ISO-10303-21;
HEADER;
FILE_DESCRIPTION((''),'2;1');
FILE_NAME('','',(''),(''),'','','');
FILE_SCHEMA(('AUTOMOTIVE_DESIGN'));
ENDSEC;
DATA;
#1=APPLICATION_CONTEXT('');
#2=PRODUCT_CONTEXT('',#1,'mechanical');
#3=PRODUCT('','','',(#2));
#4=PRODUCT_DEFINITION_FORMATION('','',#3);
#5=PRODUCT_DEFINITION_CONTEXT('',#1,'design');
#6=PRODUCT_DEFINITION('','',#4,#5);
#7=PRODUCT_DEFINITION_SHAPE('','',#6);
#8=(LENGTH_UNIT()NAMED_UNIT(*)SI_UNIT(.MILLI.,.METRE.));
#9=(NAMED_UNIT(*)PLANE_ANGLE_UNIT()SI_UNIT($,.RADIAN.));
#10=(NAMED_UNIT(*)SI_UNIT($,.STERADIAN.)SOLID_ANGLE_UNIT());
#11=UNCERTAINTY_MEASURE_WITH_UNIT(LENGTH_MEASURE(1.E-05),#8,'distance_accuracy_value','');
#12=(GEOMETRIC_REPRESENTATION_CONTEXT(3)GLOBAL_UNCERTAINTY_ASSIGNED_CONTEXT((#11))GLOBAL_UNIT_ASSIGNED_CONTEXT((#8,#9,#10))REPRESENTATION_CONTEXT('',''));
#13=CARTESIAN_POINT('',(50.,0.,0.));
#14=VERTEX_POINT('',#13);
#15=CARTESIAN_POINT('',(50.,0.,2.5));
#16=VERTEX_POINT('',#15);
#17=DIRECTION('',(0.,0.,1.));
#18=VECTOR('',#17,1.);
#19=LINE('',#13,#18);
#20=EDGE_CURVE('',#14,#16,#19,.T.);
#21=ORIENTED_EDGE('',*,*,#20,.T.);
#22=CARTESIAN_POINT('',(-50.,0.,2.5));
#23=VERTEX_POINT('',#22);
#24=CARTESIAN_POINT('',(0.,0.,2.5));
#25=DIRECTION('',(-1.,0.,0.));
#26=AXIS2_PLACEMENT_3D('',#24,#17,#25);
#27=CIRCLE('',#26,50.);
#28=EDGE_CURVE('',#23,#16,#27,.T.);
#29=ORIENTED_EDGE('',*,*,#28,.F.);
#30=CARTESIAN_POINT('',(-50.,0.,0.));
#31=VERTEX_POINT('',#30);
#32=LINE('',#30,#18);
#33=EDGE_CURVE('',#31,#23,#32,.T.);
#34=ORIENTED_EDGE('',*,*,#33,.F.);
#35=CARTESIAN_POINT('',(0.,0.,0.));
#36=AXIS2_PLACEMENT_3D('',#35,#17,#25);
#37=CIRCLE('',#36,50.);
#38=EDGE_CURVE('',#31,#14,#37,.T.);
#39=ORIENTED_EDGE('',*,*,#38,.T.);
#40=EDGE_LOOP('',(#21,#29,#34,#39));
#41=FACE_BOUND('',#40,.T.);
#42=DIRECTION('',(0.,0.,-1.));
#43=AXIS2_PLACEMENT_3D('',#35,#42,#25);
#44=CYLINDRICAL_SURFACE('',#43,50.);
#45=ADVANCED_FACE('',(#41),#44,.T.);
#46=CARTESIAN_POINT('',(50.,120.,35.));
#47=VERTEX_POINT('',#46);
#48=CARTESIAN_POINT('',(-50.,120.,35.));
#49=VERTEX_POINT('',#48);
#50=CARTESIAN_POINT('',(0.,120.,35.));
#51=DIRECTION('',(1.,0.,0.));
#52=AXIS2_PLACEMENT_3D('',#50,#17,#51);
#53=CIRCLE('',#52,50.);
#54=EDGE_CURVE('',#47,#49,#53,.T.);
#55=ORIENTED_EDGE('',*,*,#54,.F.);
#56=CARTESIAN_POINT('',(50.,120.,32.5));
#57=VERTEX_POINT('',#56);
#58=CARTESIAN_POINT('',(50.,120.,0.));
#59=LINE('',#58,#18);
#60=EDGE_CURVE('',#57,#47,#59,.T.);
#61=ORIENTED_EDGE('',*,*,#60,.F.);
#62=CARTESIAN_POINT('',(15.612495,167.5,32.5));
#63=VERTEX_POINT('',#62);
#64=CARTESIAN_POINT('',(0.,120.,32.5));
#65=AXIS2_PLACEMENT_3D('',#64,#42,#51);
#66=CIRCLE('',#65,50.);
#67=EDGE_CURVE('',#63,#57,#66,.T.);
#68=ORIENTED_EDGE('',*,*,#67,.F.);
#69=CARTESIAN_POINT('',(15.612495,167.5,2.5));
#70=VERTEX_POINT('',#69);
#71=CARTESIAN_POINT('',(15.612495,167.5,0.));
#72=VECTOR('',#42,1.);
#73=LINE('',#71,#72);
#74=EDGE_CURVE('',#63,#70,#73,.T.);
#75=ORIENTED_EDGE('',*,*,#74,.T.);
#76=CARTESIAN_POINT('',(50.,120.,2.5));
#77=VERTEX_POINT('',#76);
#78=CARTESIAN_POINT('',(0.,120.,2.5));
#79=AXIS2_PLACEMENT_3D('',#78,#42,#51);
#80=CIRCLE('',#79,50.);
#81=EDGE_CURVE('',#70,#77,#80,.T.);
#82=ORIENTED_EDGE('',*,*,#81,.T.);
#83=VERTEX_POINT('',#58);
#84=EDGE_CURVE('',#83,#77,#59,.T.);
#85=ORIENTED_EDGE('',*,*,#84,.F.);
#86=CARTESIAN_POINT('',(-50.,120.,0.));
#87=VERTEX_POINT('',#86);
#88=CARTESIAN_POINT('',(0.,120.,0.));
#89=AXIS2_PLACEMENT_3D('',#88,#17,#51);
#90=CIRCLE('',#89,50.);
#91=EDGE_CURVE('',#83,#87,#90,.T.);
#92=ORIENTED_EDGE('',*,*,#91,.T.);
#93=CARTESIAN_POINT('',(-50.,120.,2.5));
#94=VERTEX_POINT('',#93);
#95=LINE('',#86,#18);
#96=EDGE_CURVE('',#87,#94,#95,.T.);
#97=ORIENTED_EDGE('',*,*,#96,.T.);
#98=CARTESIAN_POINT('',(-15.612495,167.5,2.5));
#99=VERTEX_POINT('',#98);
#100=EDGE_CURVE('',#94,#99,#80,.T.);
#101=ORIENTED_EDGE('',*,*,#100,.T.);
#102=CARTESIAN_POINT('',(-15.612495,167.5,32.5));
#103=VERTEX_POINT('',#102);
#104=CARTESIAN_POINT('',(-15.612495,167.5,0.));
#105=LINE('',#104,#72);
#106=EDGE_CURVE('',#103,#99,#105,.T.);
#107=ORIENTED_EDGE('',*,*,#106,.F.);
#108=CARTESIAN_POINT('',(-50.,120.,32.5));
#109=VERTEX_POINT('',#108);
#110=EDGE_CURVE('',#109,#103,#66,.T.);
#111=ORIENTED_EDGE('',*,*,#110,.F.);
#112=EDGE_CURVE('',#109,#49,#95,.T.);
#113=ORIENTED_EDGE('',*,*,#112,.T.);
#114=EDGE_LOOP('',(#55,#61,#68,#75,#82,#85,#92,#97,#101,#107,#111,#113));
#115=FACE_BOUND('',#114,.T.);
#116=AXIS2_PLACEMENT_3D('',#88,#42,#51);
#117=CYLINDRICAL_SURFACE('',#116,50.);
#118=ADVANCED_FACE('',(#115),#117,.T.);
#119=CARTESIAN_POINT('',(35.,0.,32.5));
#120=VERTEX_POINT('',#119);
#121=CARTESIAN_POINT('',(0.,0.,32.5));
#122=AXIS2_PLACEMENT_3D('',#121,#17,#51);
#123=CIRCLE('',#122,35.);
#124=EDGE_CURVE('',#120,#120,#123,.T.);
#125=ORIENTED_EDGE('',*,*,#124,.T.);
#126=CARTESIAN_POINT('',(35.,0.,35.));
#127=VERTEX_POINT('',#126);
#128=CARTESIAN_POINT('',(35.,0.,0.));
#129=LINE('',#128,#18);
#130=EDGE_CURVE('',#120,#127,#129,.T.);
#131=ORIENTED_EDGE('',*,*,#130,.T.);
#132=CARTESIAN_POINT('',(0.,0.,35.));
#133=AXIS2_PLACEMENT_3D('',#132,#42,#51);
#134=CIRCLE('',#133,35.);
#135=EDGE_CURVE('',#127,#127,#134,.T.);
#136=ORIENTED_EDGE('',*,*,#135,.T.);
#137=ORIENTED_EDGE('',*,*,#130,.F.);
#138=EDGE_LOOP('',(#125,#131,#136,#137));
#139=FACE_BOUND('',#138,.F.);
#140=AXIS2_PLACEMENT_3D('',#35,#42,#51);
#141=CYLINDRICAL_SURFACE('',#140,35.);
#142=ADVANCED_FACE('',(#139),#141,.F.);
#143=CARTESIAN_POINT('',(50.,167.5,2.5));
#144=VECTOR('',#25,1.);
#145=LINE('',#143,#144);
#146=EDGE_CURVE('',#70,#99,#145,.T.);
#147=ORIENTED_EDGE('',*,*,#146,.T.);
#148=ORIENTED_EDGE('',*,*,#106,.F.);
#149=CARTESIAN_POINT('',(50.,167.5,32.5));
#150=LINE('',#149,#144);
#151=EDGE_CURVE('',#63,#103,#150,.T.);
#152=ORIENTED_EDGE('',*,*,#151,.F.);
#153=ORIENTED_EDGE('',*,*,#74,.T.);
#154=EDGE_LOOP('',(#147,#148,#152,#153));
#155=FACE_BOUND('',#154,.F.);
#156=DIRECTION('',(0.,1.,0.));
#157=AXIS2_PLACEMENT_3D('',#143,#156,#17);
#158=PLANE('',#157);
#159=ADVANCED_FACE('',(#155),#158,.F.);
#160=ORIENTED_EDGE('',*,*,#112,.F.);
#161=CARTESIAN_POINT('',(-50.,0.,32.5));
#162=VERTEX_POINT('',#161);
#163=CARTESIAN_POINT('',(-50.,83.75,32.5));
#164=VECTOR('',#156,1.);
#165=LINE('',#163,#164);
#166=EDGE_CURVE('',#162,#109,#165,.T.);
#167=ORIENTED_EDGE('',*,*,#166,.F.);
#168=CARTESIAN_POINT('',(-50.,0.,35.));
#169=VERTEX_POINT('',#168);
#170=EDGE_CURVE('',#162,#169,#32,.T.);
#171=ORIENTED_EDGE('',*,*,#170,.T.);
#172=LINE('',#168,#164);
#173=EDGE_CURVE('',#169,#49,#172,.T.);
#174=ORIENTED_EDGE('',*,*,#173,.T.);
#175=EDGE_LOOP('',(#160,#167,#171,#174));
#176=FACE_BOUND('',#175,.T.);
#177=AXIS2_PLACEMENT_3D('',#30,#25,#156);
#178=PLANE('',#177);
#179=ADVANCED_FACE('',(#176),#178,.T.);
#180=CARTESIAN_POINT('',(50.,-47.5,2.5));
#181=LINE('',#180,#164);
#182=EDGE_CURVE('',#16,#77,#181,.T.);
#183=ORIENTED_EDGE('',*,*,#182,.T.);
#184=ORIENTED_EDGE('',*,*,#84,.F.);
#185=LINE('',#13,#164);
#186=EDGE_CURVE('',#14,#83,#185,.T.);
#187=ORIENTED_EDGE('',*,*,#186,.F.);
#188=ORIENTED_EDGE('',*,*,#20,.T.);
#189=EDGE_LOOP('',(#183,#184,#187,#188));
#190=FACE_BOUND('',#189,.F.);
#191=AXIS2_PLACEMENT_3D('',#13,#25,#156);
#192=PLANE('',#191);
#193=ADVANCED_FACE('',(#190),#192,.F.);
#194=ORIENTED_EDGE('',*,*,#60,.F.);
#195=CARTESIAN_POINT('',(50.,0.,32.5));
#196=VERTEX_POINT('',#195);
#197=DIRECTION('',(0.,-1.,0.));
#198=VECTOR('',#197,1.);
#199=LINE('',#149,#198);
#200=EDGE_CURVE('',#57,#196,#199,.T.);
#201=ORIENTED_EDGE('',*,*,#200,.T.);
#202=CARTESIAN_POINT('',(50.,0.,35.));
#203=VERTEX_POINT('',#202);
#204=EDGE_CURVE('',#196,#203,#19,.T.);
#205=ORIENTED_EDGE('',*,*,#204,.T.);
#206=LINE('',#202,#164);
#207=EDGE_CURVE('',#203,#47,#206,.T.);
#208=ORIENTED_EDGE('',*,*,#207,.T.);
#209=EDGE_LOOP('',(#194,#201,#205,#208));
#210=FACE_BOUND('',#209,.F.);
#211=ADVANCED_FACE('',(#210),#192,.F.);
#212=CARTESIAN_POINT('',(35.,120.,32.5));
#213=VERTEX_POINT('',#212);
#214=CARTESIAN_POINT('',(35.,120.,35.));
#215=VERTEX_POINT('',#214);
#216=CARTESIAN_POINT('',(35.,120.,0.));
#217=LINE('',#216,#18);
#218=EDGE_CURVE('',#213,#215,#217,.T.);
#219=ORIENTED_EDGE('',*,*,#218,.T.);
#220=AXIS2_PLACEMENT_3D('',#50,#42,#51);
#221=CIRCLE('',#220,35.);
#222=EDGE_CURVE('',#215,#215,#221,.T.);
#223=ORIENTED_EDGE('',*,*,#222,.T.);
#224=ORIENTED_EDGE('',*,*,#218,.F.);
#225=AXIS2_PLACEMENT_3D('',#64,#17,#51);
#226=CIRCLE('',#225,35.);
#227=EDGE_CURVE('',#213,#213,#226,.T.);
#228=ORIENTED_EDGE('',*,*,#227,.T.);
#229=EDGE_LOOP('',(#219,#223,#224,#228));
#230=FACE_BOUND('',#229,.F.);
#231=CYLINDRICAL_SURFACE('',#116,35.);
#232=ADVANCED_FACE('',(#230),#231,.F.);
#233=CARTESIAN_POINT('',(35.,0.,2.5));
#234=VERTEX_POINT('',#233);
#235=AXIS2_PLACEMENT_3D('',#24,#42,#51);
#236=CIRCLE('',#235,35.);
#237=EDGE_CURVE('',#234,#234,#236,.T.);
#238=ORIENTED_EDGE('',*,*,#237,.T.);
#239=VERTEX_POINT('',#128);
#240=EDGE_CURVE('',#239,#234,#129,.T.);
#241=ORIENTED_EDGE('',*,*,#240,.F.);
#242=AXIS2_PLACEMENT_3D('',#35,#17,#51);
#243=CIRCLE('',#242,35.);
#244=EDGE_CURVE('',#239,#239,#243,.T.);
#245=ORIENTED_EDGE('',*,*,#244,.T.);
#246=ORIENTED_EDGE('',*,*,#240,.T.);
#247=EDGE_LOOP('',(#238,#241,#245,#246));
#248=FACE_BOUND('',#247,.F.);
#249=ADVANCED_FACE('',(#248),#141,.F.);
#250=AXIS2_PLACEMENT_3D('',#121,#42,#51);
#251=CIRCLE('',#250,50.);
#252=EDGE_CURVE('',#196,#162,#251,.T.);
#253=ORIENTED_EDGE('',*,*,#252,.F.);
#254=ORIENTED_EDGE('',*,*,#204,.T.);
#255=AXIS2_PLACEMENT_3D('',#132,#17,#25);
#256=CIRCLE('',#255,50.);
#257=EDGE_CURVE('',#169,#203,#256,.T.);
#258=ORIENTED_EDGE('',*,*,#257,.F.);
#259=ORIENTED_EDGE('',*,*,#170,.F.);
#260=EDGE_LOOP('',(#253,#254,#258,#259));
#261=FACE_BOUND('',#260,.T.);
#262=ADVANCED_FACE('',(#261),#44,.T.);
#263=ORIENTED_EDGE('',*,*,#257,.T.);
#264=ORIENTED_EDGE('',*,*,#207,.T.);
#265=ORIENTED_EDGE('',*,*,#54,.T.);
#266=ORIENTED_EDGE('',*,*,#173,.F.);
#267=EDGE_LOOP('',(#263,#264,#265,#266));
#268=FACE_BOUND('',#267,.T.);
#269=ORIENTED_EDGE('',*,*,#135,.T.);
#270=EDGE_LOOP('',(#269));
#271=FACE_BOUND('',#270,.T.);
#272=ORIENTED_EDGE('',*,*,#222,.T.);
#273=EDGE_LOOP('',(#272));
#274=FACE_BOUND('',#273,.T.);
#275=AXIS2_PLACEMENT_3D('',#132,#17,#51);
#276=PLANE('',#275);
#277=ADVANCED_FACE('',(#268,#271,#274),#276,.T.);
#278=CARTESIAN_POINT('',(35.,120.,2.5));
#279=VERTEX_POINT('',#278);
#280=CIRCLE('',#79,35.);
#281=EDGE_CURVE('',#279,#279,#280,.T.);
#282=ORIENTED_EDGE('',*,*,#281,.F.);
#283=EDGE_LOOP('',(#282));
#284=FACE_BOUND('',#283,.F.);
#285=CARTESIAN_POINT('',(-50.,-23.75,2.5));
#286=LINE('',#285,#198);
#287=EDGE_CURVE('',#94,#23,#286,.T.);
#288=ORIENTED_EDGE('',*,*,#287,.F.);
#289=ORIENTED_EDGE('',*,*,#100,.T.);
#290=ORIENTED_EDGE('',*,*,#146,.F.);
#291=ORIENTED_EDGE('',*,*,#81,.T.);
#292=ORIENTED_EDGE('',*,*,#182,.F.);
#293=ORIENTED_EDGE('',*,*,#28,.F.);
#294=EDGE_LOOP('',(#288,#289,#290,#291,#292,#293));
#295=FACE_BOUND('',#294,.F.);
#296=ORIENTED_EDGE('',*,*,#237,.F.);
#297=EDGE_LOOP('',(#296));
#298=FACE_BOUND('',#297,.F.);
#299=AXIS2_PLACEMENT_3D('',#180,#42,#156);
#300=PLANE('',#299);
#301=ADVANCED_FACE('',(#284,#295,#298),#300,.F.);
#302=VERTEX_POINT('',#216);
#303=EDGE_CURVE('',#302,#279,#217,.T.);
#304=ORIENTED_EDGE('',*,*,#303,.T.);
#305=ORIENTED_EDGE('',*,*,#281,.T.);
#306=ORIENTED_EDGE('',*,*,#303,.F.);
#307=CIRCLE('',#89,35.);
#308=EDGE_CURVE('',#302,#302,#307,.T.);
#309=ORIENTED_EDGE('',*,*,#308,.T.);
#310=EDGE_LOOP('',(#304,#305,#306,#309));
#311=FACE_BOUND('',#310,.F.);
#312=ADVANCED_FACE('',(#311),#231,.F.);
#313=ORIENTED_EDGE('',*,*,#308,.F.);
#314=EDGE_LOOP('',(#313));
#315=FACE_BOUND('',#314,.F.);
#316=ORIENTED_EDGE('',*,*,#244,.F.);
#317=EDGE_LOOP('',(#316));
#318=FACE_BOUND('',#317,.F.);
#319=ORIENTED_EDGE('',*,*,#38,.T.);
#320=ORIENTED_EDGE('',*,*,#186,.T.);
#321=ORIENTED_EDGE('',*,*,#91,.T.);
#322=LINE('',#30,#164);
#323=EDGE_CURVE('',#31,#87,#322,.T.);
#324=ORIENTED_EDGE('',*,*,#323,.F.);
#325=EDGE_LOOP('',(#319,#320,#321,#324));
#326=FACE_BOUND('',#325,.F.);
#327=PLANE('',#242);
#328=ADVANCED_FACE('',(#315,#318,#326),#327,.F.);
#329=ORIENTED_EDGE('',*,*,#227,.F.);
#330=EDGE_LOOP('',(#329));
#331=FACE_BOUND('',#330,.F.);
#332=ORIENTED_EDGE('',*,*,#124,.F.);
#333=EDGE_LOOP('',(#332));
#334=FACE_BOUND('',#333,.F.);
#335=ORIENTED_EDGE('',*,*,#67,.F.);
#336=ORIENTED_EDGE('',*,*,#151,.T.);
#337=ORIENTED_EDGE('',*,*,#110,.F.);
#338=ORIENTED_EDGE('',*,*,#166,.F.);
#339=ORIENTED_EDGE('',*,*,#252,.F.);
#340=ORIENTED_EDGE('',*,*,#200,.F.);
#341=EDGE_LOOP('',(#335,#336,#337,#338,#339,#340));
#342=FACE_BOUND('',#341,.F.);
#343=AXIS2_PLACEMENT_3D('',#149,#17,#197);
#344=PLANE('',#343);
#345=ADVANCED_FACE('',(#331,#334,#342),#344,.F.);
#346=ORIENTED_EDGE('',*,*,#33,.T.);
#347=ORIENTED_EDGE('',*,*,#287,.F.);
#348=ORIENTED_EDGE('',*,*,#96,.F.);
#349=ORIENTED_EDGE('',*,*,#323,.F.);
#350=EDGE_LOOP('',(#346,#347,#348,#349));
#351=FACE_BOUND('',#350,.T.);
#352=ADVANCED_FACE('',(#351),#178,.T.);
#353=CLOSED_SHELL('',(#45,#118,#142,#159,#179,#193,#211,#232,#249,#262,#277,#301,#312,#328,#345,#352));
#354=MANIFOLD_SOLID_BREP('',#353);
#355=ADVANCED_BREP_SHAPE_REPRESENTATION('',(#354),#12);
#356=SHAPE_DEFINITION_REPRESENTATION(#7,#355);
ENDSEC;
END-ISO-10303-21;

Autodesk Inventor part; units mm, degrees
ref_plane "YZ Plane" through (0, 0, 0) normal (1, 0, 0) x (0, 1, 0)
ref_plane "XZ Plane" through (0, 0, 0) normal (0, 1, 0) x (-1, 0, 0)
ref_plane "XY Plane" through (0, 0, 0) normal (0, 0, 1) x (1, 0, 0)
sketch "Sketch1" plane through (0, 0, 0) normal (0, 0, 1) x (1, 0, 0)
  circle A0 centre (0, 0) radius 35
  circle A1 centre (0, 120) radius 35
  arc A2 (-50, 0) -> (50, 0) centre (0, 0) ccw
  arc A3 (50, 120) -> (-50, 120) centre (0, 120) ccw
  line L0 (-50, 0) -> (-50, 120)
  line L1 (50, 0) -> (50, 120)
  line L2 (0, 35) -> (0, 85)
  dimension "d0" = 70
  dimension "d1" = 70
  dimension "d3" = 15
  dimension "d4" = 15
  dimension "d7" = 50
extrude "Extrusion1" add sketch "Sketch1" along normal blind 35
sketch "Sketch2" plane through (50, 0, 0) normal (1, 0, 0) x (0, 0, -1)
  line L0 (-35, 170) -> (0, 170)
  line L1 (0, 170) -> (0, -50)
  line L2 (0, -50) -> (-35, -50)
  line L3 (-35, -50) -> (-35, 170)
  line L4 (-2.5, -47.5) -> (-2.5, 167.5)
  line L5 (-2.5, 167.5) -> (-32.5, 167.5)
  line L6 (-32.5, 167.5) -> (-32.5, -47.5)
  line L7 (-32.5, -47.5) -> (-32.5, -50)
  line L8 (-2.5, -47.5) -> (-2.5, -50)
  dimension "d8" = 220
  dimension "d9" = 2.5
extrude "Extrusion2" cut sketch "Sketch2" against normal blind 300 contours L7 L6 L5 L4 L8 L2
properties part number "sambungan leaf spring 1" material "Steel, Mild"
